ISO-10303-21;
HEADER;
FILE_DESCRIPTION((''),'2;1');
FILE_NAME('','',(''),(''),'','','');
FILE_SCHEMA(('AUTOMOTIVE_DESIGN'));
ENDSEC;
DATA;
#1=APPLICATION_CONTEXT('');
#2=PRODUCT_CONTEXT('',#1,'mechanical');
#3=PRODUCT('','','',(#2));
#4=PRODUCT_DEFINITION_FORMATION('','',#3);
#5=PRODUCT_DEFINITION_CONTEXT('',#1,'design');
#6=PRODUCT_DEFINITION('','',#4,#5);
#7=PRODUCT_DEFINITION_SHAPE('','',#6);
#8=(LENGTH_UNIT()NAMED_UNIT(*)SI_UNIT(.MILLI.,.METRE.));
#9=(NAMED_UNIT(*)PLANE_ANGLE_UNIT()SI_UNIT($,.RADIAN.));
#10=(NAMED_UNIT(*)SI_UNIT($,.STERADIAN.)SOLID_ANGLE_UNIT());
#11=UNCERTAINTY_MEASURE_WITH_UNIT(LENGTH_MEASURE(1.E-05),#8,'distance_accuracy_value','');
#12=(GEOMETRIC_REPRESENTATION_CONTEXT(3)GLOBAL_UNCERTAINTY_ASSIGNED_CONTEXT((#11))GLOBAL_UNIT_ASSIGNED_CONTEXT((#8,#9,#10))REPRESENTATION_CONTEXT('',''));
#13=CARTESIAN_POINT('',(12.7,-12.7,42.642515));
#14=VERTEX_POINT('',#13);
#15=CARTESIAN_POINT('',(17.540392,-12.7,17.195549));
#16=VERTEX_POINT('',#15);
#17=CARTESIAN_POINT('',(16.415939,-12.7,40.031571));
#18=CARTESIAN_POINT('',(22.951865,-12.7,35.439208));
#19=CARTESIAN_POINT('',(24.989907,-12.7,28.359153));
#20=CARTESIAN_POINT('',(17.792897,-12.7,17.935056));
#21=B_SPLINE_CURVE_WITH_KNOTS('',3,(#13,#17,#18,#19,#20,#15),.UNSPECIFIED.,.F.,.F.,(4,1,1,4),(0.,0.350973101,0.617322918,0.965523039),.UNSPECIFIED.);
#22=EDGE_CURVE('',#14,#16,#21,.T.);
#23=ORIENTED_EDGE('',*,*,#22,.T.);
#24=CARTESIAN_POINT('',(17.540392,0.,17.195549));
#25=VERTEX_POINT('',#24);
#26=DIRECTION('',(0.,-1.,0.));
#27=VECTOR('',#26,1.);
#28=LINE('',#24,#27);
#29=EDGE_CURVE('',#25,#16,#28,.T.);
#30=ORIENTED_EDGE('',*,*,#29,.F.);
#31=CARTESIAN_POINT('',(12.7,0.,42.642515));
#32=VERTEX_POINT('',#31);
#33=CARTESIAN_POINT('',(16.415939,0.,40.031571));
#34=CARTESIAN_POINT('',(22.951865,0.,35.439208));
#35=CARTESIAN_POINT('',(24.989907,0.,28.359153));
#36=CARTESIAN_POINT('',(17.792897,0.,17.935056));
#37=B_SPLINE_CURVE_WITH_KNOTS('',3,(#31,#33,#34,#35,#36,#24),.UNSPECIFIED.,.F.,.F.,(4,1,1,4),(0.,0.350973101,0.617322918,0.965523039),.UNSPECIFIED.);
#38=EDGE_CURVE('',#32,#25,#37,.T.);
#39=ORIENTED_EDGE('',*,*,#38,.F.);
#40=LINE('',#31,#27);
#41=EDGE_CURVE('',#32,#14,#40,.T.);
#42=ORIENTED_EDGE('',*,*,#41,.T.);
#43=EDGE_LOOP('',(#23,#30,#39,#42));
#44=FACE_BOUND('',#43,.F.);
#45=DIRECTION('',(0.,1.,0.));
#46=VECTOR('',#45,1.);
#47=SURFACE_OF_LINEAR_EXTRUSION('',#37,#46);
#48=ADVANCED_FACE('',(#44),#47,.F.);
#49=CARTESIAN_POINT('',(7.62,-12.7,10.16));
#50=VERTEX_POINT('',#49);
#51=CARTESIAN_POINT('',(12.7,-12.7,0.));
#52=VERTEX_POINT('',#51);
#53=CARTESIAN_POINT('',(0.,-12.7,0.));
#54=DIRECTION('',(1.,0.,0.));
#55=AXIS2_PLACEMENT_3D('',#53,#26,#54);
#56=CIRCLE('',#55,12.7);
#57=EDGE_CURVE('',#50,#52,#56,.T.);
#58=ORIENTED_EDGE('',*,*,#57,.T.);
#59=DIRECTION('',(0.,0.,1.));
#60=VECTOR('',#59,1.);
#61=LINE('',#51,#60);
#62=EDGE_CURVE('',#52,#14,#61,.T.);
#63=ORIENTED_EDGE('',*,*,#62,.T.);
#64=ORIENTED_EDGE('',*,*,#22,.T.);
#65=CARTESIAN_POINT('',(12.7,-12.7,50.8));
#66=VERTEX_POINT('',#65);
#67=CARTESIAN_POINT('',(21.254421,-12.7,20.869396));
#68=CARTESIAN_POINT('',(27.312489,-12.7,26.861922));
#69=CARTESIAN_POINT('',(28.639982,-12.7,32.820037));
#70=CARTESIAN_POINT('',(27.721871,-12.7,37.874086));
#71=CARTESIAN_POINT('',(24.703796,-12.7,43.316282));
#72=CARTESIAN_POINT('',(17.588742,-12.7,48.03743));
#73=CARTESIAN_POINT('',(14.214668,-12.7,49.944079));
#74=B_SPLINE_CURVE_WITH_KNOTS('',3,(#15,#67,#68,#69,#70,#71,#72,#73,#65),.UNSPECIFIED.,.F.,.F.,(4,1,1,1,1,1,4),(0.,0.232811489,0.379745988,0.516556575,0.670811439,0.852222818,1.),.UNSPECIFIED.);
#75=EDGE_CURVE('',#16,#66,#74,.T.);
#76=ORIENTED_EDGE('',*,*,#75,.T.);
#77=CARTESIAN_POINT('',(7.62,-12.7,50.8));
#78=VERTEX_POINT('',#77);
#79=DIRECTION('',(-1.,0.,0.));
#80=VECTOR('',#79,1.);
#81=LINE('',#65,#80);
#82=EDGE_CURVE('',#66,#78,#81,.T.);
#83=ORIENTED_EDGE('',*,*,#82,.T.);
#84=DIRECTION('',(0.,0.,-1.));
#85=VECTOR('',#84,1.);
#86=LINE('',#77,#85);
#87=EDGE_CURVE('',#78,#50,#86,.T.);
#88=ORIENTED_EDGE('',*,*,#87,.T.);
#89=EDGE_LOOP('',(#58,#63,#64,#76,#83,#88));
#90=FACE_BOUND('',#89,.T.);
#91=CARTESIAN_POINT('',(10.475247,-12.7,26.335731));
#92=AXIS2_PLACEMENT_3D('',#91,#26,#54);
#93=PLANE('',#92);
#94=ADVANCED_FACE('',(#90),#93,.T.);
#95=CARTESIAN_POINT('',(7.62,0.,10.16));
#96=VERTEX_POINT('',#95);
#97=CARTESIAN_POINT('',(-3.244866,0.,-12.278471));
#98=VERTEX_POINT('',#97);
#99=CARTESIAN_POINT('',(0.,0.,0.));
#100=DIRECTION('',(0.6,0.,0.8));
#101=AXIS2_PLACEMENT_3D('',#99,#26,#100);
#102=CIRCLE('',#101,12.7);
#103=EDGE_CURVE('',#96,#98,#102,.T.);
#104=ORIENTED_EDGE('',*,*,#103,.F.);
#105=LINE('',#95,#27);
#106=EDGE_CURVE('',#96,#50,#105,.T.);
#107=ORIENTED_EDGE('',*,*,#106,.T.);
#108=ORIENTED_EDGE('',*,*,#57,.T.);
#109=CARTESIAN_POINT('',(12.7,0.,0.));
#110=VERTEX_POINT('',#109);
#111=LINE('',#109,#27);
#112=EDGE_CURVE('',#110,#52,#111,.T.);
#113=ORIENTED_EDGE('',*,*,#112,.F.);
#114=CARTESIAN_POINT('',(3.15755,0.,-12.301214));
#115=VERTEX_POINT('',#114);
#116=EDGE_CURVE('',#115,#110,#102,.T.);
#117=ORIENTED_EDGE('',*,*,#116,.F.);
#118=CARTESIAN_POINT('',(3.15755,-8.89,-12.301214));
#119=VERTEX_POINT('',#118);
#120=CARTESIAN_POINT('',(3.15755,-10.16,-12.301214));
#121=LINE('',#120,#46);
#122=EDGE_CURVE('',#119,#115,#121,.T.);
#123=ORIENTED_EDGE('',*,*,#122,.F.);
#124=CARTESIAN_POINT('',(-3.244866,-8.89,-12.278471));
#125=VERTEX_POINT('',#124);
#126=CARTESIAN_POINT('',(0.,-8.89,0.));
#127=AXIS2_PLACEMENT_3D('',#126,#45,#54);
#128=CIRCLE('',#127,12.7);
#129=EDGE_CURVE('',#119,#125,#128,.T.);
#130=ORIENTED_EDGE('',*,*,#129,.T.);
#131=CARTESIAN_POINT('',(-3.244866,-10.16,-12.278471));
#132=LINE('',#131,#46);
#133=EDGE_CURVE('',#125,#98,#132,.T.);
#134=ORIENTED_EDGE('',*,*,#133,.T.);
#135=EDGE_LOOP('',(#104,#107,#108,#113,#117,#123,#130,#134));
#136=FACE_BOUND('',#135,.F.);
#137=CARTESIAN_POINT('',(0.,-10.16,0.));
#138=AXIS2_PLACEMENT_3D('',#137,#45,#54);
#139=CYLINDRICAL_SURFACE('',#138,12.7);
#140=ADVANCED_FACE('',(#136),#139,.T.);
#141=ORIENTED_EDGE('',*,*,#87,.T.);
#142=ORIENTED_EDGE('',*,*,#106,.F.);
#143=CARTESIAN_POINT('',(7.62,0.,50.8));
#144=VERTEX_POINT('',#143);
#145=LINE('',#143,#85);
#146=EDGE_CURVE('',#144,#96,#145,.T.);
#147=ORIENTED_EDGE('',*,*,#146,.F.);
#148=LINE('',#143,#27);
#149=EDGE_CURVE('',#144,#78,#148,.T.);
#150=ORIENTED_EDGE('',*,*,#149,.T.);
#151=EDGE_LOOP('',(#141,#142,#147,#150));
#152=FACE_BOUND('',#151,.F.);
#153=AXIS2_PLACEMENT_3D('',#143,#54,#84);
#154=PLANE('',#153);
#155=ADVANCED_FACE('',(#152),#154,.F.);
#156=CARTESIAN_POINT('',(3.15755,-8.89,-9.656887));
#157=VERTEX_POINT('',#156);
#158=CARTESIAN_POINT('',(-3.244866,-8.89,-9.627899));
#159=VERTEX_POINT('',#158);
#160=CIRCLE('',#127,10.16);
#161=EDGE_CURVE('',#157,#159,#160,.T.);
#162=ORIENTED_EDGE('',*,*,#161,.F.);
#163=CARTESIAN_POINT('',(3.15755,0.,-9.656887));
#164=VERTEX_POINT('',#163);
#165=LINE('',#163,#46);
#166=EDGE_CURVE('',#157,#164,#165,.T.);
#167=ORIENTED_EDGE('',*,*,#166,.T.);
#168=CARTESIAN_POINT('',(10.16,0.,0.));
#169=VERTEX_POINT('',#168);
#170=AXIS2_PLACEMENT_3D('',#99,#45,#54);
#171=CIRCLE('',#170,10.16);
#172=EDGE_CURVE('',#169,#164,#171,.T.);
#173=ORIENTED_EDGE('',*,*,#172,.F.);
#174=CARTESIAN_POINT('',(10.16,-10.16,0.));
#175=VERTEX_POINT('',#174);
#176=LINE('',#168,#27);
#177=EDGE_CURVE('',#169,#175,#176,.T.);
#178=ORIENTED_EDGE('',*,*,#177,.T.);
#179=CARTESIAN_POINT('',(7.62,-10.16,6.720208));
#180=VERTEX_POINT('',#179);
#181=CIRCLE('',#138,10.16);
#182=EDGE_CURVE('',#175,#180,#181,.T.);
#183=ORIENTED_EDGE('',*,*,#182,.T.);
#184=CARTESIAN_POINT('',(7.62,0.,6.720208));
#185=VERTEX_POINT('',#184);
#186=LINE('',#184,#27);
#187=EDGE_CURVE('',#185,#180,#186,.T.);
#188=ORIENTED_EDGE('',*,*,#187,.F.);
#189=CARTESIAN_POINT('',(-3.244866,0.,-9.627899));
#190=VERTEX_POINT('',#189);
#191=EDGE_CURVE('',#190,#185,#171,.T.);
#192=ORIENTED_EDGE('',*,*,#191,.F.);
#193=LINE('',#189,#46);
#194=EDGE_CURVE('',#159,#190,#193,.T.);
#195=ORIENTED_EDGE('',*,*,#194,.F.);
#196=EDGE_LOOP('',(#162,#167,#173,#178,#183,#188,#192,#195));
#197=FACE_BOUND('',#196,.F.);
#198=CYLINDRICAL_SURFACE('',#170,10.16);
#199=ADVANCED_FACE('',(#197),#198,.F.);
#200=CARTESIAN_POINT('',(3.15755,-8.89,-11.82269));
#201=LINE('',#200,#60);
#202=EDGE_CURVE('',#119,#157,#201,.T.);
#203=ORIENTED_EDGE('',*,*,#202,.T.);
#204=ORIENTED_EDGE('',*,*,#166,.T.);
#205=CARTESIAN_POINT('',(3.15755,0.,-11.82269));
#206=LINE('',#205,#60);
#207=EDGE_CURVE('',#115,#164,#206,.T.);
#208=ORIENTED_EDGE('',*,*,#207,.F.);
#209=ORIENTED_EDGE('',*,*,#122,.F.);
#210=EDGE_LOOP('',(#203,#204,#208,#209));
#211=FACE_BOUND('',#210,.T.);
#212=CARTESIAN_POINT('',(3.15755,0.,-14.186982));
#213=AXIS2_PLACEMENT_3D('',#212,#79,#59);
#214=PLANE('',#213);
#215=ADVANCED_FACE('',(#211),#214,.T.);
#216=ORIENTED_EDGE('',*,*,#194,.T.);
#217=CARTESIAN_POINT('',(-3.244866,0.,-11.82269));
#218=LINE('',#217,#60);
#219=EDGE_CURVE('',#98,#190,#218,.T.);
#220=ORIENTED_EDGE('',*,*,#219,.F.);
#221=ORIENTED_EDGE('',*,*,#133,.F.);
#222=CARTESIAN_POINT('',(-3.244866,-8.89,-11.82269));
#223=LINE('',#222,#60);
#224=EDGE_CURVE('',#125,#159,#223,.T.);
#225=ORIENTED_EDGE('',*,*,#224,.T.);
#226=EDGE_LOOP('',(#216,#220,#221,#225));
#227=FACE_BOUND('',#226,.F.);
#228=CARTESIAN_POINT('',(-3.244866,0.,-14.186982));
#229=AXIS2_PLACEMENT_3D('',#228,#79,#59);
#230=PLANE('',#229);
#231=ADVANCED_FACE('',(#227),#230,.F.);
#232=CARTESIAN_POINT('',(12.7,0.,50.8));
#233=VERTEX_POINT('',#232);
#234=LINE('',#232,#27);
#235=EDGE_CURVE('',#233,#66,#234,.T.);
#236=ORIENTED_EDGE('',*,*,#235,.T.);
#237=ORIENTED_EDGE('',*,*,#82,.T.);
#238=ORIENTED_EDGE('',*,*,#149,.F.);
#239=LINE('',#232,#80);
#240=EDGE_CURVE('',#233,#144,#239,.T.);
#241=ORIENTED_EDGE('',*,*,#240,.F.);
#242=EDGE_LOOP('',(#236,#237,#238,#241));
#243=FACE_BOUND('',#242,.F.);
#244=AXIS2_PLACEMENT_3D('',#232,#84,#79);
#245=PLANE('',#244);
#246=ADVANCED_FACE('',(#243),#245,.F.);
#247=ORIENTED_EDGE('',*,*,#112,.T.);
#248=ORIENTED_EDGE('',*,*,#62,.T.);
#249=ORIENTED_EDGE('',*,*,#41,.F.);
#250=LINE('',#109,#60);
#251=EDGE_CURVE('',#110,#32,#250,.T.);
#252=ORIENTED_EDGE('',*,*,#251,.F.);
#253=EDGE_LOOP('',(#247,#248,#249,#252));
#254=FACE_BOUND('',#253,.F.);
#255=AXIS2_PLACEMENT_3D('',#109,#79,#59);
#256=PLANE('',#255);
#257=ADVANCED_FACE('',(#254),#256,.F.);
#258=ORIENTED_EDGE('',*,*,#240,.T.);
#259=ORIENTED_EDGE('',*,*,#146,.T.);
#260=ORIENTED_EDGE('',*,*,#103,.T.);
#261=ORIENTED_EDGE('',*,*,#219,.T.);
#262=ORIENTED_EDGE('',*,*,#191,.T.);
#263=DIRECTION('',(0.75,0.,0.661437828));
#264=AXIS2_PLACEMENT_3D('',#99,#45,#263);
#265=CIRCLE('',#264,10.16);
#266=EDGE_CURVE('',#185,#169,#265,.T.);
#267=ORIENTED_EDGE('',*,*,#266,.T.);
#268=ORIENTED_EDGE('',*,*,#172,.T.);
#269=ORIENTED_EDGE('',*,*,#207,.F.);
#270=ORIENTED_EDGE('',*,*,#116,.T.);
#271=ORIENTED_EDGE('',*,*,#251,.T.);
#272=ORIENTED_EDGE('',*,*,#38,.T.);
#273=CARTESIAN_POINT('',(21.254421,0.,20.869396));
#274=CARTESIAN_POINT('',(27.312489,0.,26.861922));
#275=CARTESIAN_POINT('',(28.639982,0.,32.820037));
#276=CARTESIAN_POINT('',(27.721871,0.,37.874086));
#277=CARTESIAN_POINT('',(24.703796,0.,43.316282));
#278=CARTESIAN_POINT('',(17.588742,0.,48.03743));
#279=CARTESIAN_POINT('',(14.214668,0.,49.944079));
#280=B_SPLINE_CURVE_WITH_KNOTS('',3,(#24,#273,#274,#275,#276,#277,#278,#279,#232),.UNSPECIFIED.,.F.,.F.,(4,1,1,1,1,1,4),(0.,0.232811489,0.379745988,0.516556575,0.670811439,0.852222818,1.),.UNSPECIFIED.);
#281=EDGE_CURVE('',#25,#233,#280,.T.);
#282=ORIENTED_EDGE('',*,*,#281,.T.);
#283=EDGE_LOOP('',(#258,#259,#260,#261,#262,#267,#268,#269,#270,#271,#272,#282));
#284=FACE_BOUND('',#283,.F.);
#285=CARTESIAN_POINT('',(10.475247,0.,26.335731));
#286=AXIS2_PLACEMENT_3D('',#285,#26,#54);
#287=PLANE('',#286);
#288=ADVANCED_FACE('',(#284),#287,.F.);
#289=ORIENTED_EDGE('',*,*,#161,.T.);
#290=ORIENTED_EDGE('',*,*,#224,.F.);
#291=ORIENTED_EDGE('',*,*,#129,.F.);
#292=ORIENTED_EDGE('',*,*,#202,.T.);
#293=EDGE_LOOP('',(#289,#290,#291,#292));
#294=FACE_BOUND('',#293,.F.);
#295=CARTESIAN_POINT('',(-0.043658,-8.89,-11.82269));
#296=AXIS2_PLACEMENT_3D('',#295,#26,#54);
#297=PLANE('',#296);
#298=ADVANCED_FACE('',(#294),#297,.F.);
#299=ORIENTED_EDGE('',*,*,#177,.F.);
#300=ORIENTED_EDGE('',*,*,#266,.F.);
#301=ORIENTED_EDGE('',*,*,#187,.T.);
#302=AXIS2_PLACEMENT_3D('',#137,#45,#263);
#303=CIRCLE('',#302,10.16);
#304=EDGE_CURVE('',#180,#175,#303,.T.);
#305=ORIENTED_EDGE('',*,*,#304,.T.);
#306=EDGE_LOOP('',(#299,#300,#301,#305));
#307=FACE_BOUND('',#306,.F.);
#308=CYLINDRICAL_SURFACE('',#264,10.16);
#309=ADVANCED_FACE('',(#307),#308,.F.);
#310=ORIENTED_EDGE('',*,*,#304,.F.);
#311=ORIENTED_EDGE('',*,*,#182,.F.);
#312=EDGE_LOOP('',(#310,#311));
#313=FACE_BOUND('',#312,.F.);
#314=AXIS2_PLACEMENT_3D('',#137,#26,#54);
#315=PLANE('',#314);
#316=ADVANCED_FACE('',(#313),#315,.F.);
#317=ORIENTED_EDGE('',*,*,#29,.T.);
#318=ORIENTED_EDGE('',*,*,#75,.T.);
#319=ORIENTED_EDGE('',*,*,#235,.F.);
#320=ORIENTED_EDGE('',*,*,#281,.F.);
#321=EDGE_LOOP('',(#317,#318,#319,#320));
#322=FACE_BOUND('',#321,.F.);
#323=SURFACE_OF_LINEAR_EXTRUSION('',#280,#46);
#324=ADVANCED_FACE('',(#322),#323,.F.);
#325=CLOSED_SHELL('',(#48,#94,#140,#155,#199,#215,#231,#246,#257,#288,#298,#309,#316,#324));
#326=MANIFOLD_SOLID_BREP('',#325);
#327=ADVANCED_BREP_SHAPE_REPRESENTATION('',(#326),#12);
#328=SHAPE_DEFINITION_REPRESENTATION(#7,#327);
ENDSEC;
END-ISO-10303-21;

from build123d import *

# Parameters (mm, degrees)
F1_DEPTH = 10.16
F3_R     = 12.7
F4_DEPTH = 2.54
F5_DEPTH = 12.7
F6_W     = 6.4024168532
F6_H     = 4.7285845503
F7_DEPTH = 8.89


# Not quite as in the source:
# - a feature names something its author has since deleted; it is built from what else it names


with BuildPart() as f1:
    # F0 (on Front) → F1 (new body)
    with BuildSketch(Plane.XZ):
        with BuildLine():
            ThreePointArc((7.62, 10.16), (-11.3592253257, -5.6796126628), (12.7, 0))
            Line((12.7, 0), (10.16, 0))
            ThreePointArc((10.16, 0), (-9.5038097624, -3.5921024484), (7.62, 6.7202083301))
            Line((7.62, 6.7202083301), (7.62, 10.16))
        make_face()
        with BuildLine():
            Line((10.16, 0), (12.7, 0))
            ThreePointArc((12.7, 0), (11.3592253257, 5.6796126628), (7.62, 10.16))
            Line((7.62, 10.16), (7.62, 6.7202083301))
            ThreePointArc((7.62, 6.7202083301), (9.5038097624, 3.5921024484), (10.16, 0))
        make_face()
    extrude(amount=F1_DEPTH)

    # F3 (on offset) → F4 (join)
    with BuildSketch(Plane.XZ.offset(10.16)):
        Circle(F3_R)
    extrude(amount=F4_DEPTH)

    # F0 (on Front) → F5 (join)
    with BuildSketch(Plane.XZ):
        with BuildLine():
            ThreePointArc((7.62, 10.16), (11.3592253257, 5.6796126628), (12.7, 0))
            Line((12.7, 0), (12.7, 42.6425151527))
            Line((12.7, 42.6425151527), (12.7, 50.8))
            Line((12.7, 50.8), (7.62, 50.8))
            Line((7.62, 50.8), (7.62, 10.16))
        make_face()
        with BuildLine():
            Line((12.7, 50.8), (12.7, 42.6425151527))
            add(Edge.make_bspline(
                [(12.7, 42.6425151527), (16.4159388024, 40.0315705937), (22.9518647177, 35.4392075022), (24.9899073327, 28.3591527492), (17.7928973736, 17.9350558311), (17.5403915346, 17.1955488622)],
                knots=[0, 0, 0, 0, 0.3509731008, 0.6173229181, 0.9655230387, 0.9655230387, 0.9655230387, 0.9655230387], degree=3))
            add(Edge.make_bspline(
                [(17.5403915346, 17.1955488622), (21.2544211974, 20.8693964105), (27.3124893335, 26.8619222623), (28.6399816467, 32.8200369115), (27.7218714736, 37.874085965), (24.7037959914, 43.3162815788), (17.5887424866, 48.0374298627), (14.2146676642, 49.9440793479), (12.7, 50.8)],
                knots=[0, 0, 0, 0, 0.2328114889, 0.3797459877, 0.5165565754, 0.6708114391, 0.8522228182, 1, 1, 1, 1], degree=3))
        make_face()
    extrude(amount=F5_DEPTH)

    # F6 (on Front) → F7 (cut)
    with BuildSketch(Plane.XZ):
        with Locations((-0.0436579576, -11.8226897903)):
            Rectangle(F6_W, F6_H)
    extrude(amount=F7_DEPTH, mode=Mode.SUBTRACT)


solid = f1.part
